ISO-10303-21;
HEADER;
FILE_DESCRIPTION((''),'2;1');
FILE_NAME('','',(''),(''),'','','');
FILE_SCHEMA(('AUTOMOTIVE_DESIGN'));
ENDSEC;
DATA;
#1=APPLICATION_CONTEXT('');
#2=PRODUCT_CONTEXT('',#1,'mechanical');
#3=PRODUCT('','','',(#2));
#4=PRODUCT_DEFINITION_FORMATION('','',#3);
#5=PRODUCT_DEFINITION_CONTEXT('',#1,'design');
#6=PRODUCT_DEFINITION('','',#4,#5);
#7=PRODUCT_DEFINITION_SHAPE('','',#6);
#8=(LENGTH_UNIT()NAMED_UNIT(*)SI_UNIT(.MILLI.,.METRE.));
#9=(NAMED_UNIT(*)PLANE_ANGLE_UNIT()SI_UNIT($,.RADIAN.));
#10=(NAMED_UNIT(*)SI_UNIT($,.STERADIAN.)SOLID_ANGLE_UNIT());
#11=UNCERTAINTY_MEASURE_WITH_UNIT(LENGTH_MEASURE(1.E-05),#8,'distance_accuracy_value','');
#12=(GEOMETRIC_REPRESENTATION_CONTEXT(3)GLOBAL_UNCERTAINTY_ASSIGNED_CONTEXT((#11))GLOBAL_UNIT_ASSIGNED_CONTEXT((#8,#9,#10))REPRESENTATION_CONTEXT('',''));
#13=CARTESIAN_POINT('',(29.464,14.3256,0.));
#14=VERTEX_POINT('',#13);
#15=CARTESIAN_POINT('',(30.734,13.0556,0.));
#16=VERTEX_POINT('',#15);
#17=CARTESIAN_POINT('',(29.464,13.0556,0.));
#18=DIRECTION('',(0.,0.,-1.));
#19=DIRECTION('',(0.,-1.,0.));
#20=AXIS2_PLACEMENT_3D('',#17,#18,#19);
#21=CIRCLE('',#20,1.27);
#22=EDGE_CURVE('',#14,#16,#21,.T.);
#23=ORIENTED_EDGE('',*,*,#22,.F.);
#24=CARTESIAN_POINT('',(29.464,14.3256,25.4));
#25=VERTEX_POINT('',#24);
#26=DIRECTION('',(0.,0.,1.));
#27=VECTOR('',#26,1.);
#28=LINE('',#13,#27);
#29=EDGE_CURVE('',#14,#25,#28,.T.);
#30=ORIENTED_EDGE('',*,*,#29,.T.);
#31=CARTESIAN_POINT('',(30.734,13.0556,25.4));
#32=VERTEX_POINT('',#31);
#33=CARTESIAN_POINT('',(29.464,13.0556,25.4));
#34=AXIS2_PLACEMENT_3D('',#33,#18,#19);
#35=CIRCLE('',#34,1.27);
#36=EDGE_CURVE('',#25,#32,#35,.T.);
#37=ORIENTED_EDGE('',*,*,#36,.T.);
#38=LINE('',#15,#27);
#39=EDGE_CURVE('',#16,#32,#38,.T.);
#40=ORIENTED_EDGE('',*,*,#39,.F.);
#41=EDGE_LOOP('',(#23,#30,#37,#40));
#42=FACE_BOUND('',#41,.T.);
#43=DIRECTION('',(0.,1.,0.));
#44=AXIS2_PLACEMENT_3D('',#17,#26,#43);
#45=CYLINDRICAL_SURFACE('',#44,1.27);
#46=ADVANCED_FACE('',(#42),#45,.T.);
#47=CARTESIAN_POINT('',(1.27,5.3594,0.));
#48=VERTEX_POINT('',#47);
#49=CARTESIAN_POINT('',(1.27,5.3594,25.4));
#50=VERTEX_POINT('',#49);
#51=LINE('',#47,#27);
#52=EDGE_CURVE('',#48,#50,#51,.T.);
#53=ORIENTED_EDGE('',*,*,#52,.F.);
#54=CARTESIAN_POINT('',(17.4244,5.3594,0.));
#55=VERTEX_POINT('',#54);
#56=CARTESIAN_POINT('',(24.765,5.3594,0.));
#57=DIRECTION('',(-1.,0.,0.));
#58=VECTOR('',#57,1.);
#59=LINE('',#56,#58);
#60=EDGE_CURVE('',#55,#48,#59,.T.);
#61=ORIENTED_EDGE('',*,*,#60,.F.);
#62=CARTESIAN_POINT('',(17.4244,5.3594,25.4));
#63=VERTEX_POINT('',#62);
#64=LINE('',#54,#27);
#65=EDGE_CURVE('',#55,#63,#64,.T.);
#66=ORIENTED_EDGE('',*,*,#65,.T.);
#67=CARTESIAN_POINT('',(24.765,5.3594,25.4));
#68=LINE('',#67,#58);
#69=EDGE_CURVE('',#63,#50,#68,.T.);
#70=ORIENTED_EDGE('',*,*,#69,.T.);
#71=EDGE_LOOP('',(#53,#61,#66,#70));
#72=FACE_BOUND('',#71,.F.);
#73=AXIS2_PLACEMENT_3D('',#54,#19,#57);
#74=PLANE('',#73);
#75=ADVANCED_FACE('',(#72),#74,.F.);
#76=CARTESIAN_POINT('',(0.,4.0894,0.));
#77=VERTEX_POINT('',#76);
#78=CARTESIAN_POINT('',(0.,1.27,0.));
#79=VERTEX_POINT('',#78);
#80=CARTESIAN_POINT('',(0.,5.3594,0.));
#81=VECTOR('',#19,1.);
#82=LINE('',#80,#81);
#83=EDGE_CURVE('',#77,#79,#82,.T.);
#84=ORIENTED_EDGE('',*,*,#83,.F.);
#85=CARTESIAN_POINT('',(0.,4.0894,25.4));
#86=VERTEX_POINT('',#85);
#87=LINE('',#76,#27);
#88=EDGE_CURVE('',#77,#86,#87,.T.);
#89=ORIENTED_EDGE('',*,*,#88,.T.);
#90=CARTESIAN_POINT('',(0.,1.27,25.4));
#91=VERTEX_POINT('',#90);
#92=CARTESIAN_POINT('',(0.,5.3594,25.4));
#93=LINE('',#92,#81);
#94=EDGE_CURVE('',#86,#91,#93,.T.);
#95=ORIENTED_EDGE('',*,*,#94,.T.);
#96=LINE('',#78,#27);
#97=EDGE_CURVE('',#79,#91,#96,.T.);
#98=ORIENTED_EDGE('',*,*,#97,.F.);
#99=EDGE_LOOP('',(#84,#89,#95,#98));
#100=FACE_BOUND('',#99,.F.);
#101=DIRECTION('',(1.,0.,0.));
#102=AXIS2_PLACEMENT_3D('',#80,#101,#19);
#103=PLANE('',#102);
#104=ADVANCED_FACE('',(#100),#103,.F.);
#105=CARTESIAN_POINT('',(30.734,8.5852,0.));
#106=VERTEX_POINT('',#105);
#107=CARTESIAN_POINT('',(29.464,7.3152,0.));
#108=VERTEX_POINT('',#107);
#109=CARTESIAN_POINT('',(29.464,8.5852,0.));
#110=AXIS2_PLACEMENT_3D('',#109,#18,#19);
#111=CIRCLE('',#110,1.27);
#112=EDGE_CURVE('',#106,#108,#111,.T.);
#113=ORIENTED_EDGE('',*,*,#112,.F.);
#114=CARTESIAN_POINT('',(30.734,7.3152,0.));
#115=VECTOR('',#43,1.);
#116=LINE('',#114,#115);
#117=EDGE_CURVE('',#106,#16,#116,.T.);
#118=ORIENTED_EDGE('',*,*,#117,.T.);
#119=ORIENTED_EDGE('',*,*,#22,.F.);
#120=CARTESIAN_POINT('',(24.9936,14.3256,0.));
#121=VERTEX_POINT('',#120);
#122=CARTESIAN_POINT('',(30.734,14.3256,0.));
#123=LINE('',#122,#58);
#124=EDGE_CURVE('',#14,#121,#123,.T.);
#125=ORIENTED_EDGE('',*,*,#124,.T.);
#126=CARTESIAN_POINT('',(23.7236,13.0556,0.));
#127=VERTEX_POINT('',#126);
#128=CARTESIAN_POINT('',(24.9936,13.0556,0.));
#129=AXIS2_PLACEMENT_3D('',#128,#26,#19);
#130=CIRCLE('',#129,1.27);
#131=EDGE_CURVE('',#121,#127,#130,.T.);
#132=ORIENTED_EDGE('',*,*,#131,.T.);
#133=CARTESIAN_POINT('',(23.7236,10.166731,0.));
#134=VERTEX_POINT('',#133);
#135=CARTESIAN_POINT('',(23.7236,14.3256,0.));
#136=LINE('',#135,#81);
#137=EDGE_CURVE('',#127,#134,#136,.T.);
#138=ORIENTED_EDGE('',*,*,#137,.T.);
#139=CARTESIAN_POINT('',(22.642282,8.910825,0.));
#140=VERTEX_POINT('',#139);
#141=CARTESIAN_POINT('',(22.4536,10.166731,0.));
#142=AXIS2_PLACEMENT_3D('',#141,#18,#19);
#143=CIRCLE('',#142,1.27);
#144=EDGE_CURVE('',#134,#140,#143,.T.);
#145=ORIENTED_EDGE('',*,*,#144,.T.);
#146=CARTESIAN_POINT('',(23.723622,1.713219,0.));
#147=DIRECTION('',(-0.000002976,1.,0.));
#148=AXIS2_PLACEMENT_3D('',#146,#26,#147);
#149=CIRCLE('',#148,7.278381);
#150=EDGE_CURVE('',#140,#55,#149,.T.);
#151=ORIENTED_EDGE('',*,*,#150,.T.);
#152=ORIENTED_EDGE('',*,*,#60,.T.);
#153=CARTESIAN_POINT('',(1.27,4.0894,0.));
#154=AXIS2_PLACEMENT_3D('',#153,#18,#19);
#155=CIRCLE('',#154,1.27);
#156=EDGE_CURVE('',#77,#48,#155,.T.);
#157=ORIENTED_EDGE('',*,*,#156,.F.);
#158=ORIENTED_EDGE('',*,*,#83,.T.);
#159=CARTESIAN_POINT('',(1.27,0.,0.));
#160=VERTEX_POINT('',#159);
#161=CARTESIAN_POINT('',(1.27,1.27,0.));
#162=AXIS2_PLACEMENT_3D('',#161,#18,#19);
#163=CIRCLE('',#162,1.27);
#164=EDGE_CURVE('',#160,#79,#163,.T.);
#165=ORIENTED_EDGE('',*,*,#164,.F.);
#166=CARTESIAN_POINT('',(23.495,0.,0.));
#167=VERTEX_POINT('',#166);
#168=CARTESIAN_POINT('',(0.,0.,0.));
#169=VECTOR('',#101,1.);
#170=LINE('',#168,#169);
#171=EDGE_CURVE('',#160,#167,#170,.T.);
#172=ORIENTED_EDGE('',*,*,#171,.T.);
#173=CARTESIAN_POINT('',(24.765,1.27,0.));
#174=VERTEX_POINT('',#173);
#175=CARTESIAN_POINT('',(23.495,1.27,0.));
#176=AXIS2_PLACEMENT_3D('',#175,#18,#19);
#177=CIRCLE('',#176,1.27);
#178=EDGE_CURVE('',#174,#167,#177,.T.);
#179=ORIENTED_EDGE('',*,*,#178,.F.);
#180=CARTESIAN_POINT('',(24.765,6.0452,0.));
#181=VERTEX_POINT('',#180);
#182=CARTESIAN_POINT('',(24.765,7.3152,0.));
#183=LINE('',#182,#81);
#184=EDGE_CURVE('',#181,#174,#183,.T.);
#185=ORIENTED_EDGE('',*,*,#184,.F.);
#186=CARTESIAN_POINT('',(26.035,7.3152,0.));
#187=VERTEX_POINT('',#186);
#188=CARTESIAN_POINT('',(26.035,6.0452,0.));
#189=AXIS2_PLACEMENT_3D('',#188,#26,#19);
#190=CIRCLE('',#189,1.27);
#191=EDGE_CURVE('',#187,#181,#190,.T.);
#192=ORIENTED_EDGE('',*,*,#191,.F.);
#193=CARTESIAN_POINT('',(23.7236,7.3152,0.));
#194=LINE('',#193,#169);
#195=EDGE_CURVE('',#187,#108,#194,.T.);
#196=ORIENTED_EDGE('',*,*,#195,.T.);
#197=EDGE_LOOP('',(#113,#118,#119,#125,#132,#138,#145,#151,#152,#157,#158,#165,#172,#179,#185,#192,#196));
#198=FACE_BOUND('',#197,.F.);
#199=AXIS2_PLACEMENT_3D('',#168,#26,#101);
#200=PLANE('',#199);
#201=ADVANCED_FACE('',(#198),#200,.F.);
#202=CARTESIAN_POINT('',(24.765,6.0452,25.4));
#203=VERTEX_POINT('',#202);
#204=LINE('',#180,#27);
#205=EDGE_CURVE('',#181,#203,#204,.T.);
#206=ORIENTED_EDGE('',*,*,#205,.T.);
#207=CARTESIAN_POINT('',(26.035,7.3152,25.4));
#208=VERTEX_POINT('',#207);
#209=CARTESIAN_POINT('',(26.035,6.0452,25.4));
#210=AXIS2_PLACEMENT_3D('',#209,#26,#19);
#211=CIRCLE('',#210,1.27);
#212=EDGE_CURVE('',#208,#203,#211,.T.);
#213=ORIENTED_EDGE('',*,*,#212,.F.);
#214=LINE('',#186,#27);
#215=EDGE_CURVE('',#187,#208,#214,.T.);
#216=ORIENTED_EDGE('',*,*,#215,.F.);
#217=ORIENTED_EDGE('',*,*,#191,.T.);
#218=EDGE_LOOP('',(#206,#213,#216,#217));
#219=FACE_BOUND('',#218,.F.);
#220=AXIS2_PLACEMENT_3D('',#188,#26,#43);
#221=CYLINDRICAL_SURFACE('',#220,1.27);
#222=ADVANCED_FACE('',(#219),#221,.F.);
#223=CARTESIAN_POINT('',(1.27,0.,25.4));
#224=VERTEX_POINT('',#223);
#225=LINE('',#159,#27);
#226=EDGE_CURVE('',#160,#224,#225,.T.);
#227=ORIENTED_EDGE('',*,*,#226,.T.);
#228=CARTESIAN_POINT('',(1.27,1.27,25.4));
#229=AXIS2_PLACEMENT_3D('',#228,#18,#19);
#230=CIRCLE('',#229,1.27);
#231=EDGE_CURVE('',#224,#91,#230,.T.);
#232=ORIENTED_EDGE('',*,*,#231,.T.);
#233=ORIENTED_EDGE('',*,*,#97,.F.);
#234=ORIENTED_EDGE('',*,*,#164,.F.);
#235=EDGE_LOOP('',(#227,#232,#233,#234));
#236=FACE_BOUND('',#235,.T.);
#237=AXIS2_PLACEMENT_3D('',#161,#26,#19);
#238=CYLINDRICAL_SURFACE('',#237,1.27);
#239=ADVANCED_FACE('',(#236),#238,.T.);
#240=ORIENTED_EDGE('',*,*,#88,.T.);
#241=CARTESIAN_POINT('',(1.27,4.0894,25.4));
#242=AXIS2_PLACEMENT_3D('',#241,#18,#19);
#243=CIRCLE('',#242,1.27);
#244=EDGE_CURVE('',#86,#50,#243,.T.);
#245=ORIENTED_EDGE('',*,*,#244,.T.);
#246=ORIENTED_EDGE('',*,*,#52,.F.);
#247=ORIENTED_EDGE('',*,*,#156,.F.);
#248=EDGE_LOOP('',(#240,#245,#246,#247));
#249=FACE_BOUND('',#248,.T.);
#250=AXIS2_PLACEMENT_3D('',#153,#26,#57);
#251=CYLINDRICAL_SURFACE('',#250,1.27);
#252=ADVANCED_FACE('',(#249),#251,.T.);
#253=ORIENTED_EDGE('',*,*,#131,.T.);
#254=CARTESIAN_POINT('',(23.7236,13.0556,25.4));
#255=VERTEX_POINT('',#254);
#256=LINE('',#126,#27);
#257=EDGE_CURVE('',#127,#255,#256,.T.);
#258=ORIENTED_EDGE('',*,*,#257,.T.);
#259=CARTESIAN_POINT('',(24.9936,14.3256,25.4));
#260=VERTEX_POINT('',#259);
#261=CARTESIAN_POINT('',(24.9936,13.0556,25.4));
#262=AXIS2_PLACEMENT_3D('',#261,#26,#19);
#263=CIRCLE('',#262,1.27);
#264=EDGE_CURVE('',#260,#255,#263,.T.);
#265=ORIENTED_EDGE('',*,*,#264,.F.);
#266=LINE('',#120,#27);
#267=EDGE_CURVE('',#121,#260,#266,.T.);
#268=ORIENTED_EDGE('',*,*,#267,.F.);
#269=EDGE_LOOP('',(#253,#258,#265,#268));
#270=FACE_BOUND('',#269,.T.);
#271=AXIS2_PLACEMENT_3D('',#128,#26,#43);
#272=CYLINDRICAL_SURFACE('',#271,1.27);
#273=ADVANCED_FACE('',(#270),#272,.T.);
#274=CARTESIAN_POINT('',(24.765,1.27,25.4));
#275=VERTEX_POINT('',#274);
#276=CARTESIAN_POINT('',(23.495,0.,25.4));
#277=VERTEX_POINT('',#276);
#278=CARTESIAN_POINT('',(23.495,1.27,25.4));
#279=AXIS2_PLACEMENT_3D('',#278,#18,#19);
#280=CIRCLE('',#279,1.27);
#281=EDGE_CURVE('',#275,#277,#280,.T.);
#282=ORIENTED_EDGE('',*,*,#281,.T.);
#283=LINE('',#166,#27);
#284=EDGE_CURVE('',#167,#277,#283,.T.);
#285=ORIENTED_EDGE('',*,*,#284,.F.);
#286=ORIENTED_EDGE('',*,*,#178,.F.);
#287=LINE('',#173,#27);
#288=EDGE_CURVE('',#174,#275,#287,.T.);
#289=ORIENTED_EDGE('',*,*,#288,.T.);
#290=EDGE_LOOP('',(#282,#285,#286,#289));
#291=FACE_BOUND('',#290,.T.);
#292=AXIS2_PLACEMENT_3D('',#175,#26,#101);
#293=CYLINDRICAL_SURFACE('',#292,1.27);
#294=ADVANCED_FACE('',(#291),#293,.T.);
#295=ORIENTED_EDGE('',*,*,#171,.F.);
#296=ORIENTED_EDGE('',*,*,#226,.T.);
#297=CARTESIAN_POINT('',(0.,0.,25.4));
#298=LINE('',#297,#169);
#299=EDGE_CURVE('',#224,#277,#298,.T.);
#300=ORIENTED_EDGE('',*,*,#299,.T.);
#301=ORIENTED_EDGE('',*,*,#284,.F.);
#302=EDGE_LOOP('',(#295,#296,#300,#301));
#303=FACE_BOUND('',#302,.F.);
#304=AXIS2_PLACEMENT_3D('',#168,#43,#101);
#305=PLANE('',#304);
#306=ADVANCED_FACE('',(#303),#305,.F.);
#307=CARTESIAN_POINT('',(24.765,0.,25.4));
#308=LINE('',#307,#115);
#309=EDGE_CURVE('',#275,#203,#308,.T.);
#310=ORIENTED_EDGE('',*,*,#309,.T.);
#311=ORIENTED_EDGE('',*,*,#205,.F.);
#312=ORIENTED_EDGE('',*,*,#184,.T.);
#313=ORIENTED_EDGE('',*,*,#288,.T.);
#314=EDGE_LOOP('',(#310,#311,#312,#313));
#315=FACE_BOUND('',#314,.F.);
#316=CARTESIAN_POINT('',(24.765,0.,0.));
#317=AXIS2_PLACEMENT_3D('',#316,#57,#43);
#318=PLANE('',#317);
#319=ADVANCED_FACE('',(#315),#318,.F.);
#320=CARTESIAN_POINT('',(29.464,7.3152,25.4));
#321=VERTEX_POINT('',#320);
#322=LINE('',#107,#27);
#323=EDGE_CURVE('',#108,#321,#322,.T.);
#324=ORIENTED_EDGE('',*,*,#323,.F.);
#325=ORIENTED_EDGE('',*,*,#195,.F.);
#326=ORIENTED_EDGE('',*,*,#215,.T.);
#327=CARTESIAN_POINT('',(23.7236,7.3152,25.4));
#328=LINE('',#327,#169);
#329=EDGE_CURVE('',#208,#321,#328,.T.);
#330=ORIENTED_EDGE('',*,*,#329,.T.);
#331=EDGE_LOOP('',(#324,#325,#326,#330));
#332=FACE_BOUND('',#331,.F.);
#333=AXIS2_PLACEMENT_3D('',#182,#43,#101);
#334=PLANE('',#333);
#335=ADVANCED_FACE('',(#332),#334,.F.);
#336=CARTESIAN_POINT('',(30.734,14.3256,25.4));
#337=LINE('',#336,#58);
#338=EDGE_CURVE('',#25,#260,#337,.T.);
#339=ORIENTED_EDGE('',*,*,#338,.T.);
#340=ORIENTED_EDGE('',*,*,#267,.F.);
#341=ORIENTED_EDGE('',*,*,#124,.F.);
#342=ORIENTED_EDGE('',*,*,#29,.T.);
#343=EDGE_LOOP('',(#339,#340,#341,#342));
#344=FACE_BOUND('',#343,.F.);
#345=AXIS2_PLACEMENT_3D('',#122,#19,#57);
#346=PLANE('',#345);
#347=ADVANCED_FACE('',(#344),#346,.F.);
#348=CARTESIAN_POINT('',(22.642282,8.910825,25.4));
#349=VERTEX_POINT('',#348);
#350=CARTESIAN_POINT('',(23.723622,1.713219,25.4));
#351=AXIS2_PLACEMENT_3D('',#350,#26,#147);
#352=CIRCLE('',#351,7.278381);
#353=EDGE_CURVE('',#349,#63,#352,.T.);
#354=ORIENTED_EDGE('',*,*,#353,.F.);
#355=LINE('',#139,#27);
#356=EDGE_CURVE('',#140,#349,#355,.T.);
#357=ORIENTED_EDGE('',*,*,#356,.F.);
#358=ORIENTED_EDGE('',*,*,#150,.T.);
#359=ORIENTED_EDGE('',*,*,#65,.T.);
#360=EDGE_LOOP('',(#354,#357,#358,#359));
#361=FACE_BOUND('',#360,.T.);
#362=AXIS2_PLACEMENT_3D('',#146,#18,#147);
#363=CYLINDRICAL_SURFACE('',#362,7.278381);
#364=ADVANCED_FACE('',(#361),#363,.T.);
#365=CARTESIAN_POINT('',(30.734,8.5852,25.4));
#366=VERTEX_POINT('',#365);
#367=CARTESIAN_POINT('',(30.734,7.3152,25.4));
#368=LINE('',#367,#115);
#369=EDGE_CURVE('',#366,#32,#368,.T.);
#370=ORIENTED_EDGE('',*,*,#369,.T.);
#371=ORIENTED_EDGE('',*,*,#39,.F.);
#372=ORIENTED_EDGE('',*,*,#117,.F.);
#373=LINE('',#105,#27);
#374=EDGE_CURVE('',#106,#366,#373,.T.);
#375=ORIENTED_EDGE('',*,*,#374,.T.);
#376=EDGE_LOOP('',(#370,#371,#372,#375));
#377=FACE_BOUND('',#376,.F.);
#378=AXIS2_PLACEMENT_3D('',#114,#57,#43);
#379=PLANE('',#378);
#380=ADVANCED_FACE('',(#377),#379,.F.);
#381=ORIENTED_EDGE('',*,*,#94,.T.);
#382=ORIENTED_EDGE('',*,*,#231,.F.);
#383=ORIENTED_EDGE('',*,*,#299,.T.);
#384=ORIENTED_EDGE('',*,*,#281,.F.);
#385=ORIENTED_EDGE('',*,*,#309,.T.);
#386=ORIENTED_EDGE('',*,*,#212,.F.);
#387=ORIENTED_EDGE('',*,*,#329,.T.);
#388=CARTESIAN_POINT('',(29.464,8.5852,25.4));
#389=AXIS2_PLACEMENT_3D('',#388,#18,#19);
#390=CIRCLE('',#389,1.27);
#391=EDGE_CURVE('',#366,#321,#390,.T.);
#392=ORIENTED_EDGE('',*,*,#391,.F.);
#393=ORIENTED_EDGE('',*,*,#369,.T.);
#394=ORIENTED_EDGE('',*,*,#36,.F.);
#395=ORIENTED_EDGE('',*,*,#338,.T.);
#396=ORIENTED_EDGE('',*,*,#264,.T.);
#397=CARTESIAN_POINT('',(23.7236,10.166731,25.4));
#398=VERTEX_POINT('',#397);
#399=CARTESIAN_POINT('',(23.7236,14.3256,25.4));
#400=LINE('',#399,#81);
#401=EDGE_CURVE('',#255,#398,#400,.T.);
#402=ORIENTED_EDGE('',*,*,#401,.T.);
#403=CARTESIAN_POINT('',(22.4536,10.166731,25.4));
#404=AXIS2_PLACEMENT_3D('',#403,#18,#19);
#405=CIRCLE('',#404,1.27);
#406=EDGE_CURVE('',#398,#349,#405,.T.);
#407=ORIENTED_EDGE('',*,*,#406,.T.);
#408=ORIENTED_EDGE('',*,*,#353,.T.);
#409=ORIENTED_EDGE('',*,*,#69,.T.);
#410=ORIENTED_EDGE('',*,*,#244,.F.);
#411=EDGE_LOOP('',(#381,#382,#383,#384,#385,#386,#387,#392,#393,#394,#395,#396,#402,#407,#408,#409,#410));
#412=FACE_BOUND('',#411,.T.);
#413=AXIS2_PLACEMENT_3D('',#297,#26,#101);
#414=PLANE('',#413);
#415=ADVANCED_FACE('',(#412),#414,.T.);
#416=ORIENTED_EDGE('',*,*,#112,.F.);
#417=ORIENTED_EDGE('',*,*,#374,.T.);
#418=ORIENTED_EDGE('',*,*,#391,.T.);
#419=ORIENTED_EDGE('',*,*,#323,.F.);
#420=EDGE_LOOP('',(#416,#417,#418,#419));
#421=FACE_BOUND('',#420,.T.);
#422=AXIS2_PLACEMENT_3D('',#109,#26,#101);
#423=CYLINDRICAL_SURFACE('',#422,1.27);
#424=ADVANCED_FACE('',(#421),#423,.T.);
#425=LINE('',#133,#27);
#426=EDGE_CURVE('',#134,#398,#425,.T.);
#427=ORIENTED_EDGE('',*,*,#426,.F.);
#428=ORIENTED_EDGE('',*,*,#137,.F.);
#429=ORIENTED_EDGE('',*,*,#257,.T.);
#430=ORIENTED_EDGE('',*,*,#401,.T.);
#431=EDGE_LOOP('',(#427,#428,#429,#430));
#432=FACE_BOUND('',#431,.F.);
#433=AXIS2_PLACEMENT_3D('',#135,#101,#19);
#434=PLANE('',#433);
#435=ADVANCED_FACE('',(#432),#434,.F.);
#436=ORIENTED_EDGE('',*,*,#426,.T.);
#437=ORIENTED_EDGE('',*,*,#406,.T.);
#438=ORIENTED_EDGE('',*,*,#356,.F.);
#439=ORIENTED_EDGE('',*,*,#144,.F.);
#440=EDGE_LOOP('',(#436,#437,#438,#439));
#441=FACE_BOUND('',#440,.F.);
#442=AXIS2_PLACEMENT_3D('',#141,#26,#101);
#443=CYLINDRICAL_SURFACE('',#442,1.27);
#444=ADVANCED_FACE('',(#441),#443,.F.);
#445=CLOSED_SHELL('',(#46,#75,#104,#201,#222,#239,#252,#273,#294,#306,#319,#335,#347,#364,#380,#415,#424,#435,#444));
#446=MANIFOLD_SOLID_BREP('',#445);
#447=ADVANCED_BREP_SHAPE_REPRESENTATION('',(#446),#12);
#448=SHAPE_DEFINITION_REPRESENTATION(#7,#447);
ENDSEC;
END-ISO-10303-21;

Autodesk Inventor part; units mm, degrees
ref_plane "YZ Plane" through (0, 0, 0) normal (1, 0, 0) x (0, 1, 0)
ref_plane "XZ Plane" through (0, 0, 0) normal (0, 1, 0) x (-1, 0, 0)
ref_plane "XY Plane" through (0, 0, 0) normal (0, 0, 1) x (1, 0, 0)
sketch "Sketch1" plane through (0, 0, 0) normal (0, 0, 1) x (1, 0, 0)
  line L0 (0, 0) -> (24.765, 0)
  line L1 (24.765, 0) -> (24.765, 5.3594)
  line L2 (24.765, 5.3594) -> (0, 5.3594)
  line L3 (0, 5.3594) -> (0, 0)
  line L4 (23.7236, 7.3152) -> (30.734, 7.3152)
  line L5 (30.734, 7.3152) -> (30.734, 14.3256)
  line L6 (30.734, 14.3256) -> (23.7236, 14.3256)
  line L7 (23.7236, 14.3256) -> (23.7236, 7.3152)
  arc A0 (23.7236, 8.9916) -> (17.4244, 5.3594) centre (23.7236, 1.7133) ccw
  line L8 (24.765, 5.3594) -> (24.765, 7.3152)
  dimension "d0" = 24.765
  dimension "d1" = 5.3594
  dimension "d2" = 30.734
  dimension "d3" = 7.0104
  dimension "d4" = 14.3256
  dimension "d5" = 17.4244
  dimension "d6" = 5.334
extrude "Extrusion1" add sketch "Sketch1" along normal blind 25.4
fillet "Fillet1" radius 1.27 1 edges at (30.734, 14.3256, 12.7)
fillet "Fillet2" radius 1.27 2 edges at (30.734, 7.3152, 12.7) (23.7236, 14.3256, 12.7)
fillet "Fillet3" radius 1.27 5 edges at (23.7236, 8.9916, 12.7) (24.765, 7.3152, 12.7) (24.765, 0, 12.7) (0, 0, 12.7) (0, 5.3594, 12.7)
properties part number "Igus Slider"
